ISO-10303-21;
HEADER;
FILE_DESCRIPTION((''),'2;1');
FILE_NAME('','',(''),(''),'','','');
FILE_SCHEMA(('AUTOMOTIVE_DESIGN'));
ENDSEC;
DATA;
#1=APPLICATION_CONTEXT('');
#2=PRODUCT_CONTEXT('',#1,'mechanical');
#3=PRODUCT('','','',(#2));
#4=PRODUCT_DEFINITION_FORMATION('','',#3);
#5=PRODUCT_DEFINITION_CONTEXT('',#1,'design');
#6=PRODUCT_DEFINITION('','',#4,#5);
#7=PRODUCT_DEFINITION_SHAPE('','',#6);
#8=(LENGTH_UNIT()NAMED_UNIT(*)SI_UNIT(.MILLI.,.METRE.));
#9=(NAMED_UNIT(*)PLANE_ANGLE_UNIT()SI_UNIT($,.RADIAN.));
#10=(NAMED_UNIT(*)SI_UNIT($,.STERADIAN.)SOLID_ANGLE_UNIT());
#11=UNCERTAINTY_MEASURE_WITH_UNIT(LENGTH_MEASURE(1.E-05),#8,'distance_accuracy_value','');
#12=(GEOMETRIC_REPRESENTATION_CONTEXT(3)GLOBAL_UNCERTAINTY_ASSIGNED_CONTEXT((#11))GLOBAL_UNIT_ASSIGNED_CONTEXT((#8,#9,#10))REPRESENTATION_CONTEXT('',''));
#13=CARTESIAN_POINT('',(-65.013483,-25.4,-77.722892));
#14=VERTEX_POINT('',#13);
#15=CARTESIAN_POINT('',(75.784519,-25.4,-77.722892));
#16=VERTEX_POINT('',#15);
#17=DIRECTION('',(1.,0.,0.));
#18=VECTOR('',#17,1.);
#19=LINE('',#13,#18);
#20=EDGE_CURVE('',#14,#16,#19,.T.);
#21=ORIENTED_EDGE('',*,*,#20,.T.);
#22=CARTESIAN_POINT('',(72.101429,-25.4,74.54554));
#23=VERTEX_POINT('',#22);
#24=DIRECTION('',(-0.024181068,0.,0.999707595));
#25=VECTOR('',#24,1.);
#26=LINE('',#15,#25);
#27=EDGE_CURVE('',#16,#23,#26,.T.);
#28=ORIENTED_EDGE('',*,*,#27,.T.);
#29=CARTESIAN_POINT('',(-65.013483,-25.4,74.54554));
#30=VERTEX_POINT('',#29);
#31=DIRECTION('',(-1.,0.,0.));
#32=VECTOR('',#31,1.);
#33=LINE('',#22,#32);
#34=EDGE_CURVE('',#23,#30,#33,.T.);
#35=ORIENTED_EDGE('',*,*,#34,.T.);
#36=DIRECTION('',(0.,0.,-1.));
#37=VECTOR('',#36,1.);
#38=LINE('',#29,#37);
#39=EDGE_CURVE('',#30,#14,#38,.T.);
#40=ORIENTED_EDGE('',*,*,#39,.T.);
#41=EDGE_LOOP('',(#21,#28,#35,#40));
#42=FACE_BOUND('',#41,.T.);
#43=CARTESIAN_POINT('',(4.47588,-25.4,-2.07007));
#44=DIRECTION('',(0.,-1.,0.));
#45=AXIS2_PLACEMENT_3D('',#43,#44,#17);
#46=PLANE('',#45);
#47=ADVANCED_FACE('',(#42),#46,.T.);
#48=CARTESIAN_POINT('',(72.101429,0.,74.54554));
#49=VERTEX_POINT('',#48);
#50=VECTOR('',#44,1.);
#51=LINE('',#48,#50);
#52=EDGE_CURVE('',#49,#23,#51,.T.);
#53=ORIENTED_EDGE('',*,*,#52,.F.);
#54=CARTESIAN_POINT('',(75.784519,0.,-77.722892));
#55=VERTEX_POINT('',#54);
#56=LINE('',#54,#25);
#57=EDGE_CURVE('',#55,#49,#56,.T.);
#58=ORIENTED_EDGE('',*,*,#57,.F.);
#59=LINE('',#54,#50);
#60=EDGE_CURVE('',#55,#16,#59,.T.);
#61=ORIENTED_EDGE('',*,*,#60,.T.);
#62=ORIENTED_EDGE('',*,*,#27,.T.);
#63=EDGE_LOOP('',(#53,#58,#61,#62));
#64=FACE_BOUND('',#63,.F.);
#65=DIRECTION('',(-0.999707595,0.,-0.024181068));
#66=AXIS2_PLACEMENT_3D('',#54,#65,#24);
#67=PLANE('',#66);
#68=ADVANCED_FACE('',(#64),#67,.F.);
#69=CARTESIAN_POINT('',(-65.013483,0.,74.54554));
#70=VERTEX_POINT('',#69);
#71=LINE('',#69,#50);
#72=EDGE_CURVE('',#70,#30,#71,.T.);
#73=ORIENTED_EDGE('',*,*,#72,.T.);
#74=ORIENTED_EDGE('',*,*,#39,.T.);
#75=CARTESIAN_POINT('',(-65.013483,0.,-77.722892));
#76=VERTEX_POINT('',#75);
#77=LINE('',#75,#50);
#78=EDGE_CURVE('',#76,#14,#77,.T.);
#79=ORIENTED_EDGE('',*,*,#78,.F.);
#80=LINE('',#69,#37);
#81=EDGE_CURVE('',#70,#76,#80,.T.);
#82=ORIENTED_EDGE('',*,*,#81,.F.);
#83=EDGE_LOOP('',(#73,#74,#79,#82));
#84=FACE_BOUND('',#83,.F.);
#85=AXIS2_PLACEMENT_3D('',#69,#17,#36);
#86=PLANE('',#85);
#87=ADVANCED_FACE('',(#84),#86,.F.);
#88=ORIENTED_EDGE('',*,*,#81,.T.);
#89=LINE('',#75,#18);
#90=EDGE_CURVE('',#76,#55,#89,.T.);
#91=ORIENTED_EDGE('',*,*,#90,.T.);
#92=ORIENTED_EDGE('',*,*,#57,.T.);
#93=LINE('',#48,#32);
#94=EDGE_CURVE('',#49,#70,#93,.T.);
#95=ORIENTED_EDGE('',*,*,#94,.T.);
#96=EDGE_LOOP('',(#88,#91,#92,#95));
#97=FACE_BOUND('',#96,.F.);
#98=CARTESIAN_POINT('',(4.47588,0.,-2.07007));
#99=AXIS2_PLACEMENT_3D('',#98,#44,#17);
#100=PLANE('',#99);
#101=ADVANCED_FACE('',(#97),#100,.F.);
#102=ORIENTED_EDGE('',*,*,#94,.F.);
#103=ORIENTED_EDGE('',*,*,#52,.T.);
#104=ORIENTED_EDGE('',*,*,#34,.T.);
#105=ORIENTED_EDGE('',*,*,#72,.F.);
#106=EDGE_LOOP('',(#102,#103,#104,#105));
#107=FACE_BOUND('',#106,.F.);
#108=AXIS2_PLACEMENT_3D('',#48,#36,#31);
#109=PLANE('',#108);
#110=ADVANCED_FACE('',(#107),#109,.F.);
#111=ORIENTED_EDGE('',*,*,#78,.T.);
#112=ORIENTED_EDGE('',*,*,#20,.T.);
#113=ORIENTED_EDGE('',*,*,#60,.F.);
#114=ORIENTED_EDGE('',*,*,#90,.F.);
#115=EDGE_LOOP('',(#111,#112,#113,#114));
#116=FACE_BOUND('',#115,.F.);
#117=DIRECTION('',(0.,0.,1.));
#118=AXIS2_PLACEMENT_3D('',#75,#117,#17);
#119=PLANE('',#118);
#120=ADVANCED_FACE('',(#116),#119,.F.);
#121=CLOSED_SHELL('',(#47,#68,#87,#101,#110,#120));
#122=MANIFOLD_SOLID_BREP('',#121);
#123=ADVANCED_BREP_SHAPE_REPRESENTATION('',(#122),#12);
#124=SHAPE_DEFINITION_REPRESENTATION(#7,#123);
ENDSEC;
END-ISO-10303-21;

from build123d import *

# Parameters (mm, degrees)
F1_DEPTH = 25.4


# Not quite as in the source:
# - the program builds the solid bodies; features that only make, move or delete a surface that nothing else refers to are left out


with BuildPart() as f1:
    # F0 (on Front) → F1 (new body)
    with BuildSketch(Plane.XZ):
        Polygon((75.7845193148, -77.7228921652), (72.1014291048, 74.5455399156), (-65.0134831667, 74.5455399156), (-65.0134831667, -77.7228921652), align=None)
    extrude(amount=F1_DEPTH)


solid = f1.part
